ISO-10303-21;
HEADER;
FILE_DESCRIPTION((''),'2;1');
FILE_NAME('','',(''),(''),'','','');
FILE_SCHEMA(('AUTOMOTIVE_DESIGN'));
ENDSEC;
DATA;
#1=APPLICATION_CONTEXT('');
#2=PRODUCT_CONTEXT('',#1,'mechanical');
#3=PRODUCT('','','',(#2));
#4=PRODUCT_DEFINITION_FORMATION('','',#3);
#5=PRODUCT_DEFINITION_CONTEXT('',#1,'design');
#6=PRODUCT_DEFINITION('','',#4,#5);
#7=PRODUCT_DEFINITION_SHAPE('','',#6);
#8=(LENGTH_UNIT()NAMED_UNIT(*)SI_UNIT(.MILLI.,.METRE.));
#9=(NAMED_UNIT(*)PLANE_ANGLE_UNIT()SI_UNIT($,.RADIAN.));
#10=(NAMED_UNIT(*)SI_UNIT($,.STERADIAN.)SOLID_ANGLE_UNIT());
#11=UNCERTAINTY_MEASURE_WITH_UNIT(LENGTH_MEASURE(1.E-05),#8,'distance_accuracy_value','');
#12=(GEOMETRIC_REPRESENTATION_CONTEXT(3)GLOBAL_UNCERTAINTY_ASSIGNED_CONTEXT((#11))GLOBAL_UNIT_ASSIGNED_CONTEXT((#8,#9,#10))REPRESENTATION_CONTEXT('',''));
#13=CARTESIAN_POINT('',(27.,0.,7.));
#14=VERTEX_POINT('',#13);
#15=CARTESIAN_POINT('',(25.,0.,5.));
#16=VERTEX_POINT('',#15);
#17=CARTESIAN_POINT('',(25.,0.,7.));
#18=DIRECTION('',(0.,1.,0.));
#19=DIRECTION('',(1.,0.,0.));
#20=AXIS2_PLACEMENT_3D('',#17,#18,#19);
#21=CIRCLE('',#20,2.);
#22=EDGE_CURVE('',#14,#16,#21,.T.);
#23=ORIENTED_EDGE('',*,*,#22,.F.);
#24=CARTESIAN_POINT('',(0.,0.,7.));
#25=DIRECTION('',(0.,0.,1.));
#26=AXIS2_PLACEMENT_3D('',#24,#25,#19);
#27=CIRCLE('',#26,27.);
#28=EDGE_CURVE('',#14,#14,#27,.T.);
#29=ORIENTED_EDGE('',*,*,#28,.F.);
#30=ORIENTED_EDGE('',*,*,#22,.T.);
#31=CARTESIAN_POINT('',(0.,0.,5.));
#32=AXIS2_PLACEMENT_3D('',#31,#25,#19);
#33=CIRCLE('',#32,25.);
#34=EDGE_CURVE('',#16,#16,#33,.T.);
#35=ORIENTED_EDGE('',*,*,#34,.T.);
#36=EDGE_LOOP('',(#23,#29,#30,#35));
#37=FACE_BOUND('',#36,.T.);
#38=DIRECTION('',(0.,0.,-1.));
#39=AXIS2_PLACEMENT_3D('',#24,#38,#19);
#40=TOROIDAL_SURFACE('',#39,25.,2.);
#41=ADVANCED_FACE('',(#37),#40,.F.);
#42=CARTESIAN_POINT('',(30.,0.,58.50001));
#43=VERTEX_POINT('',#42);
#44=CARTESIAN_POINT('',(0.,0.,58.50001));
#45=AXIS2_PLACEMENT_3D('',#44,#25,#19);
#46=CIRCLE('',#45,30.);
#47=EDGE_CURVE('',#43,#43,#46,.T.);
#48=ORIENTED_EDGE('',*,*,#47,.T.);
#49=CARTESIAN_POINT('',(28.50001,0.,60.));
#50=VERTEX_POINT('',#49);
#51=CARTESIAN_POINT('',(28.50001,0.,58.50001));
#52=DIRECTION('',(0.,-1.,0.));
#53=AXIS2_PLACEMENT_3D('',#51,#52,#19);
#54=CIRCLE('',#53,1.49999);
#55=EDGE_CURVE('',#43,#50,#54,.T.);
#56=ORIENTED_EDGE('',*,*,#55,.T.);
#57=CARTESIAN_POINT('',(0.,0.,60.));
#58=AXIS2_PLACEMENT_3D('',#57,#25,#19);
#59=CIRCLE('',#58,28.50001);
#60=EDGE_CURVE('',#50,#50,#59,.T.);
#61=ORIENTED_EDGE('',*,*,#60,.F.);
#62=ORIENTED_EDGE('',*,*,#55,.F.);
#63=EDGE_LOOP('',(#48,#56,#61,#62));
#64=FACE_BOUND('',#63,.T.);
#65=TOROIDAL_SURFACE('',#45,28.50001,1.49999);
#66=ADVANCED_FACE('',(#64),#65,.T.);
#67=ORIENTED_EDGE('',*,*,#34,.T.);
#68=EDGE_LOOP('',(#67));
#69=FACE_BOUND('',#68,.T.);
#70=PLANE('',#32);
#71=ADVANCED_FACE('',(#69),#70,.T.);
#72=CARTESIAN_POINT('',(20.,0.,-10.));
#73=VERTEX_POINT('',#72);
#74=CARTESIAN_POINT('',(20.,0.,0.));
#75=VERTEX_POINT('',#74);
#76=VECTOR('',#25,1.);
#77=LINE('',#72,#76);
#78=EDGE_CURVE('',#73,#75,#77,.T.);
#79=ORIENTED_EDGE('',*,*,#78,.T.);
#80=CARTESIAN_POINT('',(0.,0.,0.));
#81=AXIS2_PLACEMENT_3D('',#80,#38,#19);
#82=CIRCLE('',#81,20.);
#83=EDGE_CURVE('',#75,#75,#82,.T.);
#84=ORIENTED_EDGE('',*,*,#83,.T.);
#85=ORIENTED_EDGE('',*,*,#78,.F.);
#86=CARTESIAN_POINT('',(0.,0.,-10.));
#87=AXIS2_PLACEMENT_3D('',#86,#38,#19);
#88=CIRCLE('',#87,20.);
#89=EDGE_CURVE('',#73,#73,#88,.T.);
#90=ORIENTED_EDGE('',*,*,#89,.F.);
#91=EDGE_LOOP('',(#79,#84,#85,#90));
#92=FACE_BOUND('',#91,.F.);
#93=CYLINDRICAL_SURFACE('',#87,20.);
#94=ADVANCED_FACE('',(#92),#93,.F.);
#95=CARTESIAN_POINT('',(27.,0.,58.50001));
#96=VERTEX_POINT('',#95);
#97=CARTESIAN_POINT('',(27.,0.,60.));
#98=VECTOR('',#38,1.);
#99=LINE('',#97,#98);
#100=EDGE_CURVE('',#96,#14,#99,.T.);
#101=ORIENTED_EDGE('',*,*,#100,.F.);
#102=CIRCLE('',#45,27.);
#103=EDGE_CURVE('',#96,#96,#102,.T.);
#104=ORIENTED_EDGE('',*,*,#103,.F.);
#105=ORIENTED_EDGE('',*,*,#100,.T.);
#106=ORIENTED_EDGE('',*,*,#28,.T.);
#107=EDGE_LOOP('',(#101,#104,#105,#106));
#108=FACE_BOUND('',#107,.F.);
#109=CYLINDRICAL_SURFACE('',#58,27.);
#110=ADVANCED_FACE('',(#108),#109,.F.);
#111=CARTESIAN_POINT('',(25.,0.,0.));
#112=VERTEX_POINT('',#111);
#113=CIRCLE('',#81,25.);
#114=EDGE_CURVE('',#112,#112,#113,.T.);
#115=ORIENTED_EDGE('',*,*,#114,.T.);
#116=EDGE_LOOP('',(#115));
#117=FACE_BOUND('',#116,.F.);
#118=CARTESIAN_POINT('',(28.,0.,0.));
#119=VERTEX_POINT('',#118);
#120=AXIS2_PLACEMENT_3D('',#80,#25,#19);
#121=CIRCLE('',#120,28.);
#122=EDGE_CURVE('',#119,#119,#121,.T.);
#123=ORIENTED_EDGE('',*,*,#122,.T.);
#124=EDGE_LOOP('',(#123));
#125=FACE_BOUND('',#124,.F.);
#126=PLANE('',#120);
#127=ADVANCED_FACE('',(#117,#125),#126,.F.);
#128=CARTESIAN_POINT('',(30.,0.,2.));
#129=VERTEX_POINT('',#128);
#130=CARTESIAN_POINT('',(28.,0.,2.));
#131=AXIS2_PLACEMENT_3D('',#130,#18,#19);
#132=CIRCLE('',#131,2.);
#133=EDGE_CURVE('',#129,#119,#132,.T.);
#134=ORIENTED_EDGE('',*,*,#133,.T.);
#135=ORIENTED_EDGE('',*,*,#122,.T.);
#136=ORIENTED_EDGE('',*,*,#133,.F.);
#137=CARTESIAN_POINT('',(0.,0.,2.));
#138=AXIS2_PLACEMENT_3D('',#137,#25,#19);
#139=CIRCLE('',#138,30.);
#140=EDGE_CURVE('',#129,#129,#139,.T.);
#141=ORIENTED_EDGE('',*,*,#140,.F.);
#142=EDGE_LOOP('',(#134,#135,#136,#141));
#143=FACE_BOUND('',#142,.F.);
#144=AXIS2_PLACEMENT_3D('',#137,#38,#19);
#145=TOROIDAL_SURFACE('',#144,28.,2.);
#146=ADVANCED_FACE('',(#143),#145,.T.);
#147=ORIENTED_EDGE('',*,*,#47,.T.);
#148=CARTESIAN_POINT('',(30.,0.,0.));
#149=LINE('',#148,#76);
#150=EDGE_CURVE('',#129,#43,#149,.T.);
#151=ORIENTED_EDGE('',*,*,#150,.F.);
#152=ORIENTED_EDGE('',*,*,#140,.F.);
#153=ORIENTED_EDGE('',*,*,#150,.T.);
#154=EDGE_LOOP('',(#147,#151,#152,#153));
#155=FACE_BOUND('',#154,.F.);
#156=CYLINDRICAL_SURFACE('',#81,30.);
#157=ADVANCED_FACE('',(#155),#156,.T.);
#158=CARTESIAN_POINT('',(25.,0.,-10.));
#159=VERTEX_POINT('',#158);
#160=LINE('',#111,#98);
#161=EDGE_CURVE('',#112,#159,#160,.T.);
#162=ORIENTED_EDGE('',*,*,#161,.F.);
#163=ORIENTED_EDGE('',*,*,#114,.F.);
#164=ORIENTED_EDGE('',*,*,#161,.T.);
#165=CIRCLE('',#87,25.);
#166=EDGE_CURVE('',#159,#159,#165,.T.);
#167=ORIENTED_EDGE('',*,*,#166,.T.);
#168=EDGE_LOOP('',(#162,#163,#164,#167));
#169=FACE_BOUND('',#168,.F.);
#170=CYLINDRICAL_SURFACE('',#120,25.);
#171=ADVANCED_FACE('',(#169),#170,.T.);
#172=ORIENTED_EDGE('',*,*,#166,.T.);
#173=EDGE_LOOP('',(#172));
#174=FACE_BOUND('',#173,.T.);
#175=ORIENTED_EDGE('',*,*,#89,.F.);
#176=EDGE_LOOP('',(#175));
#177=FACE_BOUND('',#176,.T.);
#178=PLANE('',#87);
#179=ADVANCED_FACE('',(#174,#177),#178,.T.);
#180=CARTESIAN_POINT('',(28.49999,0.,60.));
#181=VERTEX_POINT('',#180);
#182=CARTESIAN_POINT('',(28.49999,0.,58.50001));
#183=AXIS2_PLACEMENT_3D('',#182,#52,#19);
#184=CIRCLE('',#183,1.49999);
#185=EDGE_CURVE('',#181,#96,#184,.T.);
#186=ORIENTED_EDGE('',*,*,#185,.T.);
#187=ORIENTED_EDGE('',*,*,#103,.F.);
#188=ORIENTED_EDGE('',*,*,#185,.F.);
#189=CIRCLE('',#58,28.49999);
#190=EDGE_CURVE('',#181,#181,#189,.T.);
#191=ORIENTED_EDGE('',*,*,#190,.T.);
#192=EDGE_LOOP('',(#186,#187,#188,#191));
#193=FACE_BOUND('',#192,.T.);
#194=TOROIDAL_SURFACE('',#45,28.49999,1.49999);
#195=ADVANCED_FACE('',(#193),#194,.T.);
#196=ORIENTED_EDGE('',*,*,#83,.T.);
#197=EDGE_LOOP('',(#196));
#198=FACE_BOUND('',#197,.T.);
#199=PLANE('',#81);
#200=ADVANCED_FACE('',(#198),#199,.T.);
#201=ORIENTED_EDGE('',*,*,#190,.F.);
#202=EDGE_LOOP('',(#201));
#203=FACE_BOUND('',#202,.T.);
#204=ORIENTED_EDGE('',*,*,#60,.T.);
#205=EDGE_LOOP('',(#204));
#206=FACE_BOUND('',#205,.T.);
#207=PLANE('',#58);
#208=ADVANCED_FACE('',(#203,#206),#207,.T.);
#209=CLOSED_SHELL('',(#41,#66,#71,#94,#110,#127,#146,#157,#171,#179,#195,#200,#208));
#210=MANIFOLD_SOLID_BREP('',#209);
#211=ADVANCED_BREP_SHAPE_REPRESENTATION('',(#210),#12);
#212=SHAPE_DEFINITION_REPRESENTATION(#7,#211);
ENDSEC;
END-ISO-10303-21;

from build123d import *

# Parameters (mm, degrees)
F0_R       = 30
F1_DEPTH   = 60
F2_R       = 27
F1_FACE1_R = 30
F3_DEPTH   = 55
F4_R       = 25
F5_DEPTH   = 10
F6_R       = 20
F7_DEPTH   = 10
F8_R       = 1.49999
F9_R       = 2
F10_R      = 2


# Not quite as in the source:
# - a fillet or chamfer is up to 0.001 mm smaller than in the source, because OpenCascade refuses the exact size


with BuildPart() as f1:
    # F0 (on Top) → F1 (new body)
    with BuildSketch(Plane.XY):
        Circle(F0_R)
    extrude(amount=F1_DEPTH)

    # F2 (on face) + F1_face1 (on face) → F3 (cut)
    with BuildSketch(Plane.XY.offset(60)):
        Circle(F2_R)
    with BuildSketch(Plane(origin=(0, 0, 0), x_dir=(1, 0, 0), z_dir=(0, 0, -1))):
        Circle(F1_FACE1_R)
    extrude(amount=-F3_DEPTH, dir=(0, 0, 1), mode=Mode.SUBTRACT)

    # F4 (on face) → F5 (join)
    with BuildSketch(Plane(origin=(0, 0, 0), x_dir=(1, 0, 0), z_dir=(0, 0, -1))):
        Circle(F4_R)
    extrude(amount=F5_DEPTH)

    # F6 (on face) → F7 (cut)
    with BuildSketch(Plane(origin=(0, 0, -10), x_dir=(1, 0, 0), z_dir=(0, 0, -1))):
        Circle(F6_R)
    extrude(amount=-F7_DEPTH, mode=Mode.SUBTRACT)

    # F8 (radius 1.5 in the source; OpenCascade refuses exactly that, so slightly less here)
    f8_edges = [f1.edges().sort_by_distance(p)[0] for p in [
        (-30, 0, 60),
        (-27, 0, 60),
    ]]
    fillet(f8_edges, radius=F8_R)

    # F9
    f9_edges = [f1.edges().sort_by_distance(p)[0] for p in [
        (-30, 0, 0),
    ]]
    fillet(f9_edges, radius=F9_R)

    # F10
    f10_edges = [f1.edges().sort_by_distance(p)[0] for p in [
        (-27, 0, 5),
    ]]
    fillet(f10_edges, radius=F10_R)


solid = f1.part
